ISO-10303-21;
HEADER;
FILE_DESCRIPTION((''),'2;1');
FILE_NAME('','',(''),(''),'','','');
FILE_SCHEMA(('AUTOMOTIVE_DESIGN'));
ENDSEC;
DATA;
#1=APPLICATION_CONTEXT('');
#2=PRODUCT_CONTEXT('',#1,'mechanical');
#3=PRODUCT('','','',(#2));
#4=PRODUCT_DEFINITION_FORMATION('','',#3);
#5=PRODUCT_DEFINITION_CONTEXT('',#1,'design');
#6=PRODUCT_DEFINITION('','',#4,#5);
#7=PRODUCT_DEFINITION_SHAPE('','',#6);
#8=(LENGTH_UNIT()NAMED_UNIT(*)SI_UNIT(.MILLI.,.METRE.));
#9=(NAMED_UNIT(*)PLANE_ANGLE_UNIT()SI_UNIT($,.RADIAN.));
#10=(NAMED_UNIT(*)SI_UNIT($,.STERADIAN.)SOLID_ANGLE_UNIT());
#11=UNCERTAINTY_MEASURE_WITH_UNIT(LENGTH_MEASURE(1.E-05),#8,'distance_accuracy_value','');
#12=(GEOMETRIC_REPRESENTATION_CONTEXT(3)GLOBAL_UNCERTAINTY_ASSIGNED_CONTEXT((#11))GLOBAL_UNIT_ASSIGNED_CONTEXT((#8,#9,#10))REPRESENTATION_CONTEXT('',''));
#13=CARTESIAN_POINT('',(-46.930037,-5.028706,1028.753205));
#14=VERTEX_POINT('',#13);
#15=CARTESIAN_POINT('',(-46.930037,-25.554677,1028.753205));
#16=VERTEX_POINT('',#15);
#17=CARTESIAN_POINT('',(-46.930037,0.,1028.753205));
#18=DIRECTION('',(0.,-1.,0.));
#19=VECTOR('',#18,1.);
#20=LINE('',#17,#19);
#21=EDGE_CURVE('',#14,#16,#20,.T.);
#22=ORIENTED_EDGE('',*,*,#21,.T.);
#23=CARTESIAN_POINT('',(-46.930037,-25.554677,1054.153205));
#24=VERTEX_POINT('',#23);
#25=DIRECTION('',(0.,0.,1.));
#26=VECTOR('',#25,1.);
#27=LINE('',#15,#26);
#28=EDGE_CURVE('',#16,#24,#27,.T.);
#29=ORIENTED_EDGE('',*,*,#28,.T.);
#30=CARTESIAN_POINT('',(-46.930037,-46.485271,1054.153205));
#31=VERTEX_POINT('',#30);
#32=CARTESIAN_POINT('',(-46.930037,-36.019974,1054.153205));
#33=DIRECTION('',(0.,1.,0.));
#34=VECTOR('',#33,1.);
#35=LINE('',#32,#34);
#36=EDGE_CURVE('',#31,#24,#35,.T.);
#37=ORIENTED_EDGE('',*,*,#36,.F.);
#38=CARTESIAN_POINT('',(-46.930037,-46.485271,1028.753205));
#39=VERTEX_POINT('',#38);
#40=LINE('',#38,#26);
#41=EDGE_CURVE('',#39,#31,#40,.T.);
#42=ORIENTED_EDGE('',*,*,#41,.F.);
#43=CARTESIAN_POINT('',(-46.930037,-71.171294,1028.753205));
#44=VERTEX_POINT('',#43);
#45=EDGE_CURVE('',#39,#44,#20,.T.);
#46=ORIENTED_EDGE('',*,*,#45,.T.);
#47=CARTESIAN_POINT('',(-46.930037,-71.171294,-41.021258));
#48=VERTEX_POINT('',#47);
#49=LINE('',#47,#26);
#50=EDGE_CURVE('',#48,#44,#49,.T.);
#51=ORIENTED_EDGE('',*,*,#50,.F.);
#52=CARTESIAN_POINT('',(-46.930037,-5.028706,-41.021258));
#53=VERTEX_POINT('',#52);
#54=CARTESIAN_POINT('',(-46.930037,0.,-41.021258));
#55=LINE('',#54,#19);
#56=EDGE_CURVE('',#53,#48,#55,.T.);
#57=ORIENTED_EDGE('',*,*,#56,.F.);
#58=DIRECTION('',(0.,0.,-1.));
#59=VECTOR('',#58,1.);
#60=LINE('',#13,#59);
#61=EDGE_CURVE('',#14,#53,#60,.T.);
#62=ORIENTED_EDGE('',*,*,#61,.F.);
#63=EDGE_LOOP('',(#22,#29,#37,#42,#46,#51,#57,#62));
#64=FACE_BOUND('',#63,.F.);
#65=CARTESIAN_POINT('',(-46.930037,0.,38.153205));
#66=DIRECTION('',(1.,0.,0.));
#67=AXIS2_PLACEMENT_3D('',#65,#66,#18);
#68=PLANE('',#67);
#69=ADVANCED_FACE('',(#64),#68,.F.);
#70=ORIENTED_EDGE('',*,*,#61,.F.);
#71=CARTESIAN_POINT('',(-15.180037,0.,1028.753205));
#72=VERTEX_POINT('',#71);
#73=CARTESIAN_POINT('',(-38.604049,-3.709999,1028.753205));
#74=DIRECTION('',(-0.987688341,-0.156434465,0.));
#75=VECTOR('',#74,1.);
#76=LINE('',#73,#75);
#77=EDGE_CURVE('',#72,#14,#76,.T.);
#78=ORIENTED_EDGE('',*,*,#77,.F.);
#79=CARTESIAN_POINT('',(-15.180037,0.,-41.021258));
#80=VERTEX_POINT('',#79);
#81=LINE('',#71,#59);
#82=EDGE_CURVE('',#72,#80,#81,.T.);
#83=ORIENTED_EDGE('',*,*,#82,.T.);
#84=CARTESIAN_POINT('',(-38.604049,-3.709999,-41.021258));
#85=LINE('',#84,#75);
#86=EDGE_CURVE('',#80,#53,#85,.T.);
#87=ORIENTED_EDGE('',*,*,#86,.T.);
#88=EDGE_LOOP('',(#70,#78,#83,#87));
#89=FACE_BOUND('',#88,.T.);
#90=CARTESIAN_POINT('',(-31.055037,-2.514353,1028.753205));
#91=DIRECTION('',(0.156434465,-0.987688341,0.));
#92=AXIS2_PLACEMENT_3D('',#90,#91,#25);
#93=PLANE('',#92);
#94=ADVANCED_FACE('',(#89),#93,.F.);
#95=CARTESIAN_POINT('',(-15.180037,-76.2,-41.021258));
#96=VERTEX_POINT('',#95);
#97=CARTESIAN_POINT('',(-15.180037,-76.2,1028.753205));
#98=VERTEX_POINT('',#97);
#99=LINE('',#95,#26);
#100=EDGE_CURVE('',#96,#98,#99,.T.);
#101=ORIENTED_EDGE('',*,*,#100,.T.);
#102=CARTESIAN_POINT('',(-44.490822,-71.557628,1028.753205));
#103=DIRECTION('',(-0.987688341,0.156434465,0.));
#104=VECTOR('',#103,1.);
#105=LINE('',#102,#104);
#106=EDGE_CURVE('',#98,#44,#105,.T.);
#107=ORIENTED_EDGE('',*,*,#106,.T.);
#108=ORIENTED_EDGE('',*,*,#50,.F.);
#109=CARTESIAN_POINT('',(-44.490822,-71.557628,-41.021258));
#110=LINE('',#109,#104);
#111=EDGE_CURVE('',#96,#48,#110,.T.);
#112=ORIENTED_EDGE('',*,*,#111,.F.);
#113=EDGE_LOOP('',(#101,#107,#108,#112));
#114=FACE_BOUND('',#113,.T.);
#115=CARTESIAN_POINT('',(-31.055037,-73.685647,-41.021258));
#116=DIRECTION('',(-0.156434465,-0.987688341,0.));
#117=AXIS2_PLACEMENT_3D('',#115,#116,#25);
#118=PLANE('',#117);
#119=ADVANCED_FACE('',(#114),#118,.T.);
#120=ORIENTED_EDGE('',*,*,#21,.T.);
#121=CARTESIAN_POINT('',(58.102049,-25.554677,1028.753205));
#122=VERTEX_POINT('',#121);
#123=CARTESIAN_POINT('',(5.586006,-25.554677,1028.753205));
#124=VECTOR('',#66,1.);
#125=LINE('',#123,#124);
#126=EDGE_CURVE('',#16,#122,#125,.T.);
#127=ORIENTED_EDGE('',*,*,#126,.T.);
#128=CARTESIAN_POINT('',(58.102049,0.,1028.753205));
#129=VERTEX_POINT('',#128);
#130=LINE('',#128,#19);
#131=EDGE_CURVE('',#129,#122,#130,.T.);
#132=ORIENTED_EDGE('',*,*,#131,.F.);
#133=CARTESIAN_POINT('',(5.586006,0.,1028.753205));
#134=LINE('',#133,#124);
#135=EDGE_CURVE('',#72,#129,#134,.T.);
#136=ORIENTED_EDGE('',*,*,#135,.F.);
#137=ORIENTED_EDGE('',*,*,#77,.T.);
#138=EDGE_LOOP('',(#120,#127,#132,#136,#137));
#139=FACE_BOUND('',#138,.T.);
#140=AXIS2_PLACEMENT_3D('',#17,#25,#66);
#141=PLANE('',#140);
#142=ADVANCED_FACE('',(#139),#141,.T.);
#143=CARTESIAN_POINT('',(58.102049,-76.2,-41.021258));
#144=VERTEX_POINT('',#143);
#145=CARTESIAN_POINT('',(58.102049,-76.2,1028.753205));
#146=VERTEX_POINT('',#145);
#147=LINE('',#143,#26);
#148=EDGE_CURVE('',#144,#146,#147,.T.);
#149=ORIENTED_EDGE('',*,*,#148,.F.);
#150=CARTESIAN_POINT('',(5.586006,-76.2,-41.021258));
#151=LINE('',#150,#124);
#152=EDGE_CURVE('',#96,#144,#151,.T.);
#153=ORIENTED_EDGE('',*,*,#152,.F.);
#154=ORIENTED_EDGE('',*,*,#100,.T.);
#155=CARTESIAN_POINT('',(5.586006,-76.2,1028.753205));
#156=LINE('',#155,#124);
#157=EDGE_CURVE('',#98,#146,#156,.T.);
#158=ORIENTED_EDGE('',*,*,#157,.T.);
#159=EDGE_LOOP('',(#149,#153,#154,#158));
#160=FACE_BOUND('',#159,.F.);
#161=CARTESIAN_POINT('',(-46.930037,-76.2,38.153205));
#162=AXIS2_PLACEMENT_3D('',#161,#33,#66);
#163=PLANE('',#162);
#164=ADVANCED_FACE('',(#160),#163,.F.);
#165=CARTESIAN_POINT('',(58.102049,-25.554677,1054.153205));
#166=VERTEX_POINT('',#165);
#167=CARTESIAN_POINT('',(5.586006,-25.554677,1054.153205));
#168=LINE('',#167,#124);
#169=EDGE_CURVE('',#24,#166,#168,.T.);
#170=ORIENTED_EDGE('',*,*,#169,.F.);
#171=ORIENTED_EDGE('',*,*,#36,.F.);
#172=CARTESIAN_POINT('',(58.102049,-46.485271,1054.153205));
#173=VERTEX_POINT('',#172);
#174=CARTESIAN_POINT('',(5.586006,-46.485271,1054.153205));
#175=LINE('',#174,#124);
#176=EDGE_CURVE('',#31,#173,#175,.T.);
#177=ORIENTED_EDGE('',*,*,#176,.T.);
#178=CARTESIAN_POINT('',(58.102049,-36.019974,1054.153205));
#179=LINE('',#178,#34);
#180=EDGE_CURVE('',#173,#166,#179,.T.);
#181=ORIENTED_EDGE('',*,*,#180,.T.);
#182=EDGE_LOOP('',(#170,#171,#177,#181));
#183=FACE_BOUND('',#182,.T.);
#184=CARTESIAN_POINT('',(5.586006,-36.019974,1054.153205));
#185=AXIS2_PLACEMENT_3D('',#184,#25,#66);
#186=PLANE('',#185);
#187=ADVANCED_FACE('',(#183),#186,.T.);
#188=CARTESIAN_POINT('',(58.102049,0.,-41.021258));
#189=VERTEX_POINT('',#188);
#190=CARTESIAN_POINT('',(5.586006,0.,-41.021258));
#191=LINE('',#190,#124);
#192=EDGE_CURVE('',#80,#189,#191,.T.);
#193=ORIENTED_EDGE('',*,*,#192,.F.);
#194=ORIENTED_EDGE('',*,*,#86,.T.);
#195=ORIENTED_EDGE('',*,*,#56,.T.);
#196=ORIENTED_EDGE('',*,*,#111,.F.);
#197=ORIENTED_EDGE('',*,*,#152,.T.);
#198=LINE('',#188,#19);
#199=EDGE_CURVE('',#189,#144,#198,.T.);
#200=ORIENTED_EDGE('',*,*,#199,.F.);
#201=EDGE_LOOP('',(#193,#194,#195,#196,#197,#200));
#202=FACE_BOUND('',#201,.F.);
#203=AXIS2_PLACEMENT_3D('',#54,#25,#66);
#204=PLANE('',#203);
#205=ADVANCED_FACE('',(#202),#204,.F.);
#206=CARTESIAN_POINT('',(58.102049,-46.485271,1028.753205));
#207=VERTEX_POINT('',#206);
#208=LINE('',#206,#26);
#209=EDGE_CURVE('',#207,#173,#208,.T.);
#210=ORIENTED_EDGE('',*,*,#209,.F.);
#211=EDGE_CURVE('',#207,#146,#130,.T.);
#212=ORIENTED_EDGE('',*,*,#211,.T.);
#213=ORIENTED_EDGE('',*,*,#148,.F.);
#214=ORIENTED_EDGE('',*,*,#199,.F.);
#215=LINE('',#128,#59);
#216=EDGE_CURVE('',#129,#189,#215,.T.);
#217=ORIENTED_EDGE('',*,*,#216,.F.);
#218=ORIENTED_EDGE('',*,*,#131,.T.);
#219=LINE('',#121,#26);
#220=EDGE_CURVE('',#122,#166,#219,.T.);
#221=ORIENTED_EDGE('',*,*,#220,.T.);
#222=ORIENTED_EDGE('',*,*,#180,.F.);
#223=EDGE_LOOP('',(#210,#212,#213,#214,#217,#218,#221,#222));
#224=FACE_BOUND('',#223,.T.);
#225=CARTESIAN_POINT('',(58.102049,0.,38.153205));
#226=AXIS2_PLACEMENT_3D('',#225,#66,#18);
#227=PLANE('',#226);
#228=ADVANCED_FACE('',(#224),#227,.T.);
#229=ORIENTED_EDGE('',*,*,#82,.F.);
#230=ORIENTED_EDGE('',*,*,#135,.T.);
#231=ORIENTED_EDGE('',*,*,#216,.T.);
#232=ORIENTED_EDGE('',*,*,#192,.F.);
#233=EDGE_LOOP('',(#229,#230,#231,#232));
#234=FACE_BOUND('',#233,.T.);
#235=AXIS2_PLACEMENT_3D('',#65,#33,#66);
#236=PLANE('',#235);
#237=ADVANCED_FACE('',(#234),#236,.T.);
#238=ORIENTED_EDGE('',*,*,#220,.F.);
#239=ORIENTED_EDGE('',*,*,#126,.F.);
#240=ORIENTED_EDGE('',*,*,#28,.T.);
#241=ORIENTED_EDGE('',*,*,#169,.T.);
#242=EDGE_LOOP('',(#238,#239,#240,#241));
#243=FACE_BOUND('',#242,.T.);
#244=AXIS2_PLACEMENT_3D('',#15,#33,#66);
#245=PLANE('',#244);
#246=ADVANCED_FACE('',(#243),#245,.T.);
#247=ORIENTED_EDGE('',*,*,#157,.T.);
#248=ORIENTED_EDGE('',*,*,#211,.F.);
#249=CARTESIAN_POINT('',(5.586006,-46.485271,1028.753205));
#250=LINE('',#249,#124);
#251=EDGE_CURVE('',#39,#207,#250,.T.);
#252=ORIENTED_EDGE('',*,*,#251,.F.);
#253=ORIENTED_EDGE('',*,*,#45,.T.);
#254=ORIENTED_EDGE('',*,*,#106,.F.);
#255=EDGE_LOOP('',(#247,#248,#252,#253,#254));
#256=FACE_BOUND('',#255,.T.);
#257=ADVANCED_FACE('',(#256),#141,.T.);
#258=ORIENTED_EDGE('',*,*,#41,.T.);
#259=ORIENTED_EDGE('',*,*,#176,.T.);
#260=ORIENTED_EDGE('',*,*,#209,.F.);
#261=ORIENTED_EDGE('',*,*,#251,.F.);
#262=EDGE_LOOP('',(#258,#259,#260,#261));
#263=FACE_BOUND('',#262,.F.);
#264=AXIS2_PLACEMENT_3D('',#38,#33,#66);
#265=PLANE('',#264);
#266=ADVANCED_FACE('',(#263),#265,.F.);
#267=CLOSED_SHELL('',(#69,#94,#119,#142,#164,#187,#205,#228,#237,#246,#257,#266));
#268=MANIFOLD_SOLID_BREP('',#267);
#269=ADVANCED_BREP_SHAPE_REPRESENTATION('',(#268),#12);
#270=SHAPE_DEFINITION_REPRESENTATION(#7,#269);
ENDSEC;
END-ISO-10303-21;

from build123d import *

# Parameters (mm, degrees)
F0_W     = 105.0320863724
F0_H     = 79.1744627059
F1_DEPTH = 76.2
F2_DEPTH = 990.6
F3_W     = 105.0320863724
F3_H     = 20.9305938333
F4_DEPTH = 25.4
F5_SIZE2 = 5.0287059803
F5_SIZE  = 31.75
F6_SIZE2 = 5.0287059803
F6_SIZE  = 31.75


# Not quite as in the source:
# - the program builds the solid bodies; features that only make, move or delete a surface that nothing else refers to are left out


with BuildPart() as f1:
    # F0 (on Front) → F1 (new body)
    with BuildSketch(Plane.XZ):
        with Locations((5.5860057473, -1.434026286)):
            Rectangle(F0_W, F0_H)
    extrude(amount=F1_DEPTH)

    # F2 (add): a face of the model
    f2_faces = [f1.faces().sort_by_distance(p)[0] for p in [
        (5.5860057473, -38.1, 38.1532050669),
    ]]
    extrude(f2_faces, amount=F2_DEPTH)

    # F3 (on face) → F4 (join)
    with BuildSketch(Plane.XY.offset(1028.7532050669)):
        with Locations((5.5860057473, -36.0199743882)):
            Rectangle(F3_W, F3_H)
    extrude(amount=F4_DEPTH)

    # F5
    f5_edges = [f1.edges().sort_by_distance(p)[0] for p in [
        (-46.930037, -76.2, 493.865974),
    ]]
    f5_side = f1.faces().sort_by_distance((5.586006, -76.2, 493.865974))[0]
    chamfer(f5_edges, length=F5_SIZE, length2=F5_SIZE2, reference=f5_side)

    # F6
    f6_edges = [f1.edges().sort_by_distance(p)[0] for p in [
        (-46.930037, 0, 493.865974),
    ]]
    f6_side = f1.faces().sort_by_distance((5.586006, 0, 493.865974))[0]
    chamfer(f6_edges, length=F6_SIZE, length2=F6_SIZE2, reference=f6_side)


solid = f1.part
